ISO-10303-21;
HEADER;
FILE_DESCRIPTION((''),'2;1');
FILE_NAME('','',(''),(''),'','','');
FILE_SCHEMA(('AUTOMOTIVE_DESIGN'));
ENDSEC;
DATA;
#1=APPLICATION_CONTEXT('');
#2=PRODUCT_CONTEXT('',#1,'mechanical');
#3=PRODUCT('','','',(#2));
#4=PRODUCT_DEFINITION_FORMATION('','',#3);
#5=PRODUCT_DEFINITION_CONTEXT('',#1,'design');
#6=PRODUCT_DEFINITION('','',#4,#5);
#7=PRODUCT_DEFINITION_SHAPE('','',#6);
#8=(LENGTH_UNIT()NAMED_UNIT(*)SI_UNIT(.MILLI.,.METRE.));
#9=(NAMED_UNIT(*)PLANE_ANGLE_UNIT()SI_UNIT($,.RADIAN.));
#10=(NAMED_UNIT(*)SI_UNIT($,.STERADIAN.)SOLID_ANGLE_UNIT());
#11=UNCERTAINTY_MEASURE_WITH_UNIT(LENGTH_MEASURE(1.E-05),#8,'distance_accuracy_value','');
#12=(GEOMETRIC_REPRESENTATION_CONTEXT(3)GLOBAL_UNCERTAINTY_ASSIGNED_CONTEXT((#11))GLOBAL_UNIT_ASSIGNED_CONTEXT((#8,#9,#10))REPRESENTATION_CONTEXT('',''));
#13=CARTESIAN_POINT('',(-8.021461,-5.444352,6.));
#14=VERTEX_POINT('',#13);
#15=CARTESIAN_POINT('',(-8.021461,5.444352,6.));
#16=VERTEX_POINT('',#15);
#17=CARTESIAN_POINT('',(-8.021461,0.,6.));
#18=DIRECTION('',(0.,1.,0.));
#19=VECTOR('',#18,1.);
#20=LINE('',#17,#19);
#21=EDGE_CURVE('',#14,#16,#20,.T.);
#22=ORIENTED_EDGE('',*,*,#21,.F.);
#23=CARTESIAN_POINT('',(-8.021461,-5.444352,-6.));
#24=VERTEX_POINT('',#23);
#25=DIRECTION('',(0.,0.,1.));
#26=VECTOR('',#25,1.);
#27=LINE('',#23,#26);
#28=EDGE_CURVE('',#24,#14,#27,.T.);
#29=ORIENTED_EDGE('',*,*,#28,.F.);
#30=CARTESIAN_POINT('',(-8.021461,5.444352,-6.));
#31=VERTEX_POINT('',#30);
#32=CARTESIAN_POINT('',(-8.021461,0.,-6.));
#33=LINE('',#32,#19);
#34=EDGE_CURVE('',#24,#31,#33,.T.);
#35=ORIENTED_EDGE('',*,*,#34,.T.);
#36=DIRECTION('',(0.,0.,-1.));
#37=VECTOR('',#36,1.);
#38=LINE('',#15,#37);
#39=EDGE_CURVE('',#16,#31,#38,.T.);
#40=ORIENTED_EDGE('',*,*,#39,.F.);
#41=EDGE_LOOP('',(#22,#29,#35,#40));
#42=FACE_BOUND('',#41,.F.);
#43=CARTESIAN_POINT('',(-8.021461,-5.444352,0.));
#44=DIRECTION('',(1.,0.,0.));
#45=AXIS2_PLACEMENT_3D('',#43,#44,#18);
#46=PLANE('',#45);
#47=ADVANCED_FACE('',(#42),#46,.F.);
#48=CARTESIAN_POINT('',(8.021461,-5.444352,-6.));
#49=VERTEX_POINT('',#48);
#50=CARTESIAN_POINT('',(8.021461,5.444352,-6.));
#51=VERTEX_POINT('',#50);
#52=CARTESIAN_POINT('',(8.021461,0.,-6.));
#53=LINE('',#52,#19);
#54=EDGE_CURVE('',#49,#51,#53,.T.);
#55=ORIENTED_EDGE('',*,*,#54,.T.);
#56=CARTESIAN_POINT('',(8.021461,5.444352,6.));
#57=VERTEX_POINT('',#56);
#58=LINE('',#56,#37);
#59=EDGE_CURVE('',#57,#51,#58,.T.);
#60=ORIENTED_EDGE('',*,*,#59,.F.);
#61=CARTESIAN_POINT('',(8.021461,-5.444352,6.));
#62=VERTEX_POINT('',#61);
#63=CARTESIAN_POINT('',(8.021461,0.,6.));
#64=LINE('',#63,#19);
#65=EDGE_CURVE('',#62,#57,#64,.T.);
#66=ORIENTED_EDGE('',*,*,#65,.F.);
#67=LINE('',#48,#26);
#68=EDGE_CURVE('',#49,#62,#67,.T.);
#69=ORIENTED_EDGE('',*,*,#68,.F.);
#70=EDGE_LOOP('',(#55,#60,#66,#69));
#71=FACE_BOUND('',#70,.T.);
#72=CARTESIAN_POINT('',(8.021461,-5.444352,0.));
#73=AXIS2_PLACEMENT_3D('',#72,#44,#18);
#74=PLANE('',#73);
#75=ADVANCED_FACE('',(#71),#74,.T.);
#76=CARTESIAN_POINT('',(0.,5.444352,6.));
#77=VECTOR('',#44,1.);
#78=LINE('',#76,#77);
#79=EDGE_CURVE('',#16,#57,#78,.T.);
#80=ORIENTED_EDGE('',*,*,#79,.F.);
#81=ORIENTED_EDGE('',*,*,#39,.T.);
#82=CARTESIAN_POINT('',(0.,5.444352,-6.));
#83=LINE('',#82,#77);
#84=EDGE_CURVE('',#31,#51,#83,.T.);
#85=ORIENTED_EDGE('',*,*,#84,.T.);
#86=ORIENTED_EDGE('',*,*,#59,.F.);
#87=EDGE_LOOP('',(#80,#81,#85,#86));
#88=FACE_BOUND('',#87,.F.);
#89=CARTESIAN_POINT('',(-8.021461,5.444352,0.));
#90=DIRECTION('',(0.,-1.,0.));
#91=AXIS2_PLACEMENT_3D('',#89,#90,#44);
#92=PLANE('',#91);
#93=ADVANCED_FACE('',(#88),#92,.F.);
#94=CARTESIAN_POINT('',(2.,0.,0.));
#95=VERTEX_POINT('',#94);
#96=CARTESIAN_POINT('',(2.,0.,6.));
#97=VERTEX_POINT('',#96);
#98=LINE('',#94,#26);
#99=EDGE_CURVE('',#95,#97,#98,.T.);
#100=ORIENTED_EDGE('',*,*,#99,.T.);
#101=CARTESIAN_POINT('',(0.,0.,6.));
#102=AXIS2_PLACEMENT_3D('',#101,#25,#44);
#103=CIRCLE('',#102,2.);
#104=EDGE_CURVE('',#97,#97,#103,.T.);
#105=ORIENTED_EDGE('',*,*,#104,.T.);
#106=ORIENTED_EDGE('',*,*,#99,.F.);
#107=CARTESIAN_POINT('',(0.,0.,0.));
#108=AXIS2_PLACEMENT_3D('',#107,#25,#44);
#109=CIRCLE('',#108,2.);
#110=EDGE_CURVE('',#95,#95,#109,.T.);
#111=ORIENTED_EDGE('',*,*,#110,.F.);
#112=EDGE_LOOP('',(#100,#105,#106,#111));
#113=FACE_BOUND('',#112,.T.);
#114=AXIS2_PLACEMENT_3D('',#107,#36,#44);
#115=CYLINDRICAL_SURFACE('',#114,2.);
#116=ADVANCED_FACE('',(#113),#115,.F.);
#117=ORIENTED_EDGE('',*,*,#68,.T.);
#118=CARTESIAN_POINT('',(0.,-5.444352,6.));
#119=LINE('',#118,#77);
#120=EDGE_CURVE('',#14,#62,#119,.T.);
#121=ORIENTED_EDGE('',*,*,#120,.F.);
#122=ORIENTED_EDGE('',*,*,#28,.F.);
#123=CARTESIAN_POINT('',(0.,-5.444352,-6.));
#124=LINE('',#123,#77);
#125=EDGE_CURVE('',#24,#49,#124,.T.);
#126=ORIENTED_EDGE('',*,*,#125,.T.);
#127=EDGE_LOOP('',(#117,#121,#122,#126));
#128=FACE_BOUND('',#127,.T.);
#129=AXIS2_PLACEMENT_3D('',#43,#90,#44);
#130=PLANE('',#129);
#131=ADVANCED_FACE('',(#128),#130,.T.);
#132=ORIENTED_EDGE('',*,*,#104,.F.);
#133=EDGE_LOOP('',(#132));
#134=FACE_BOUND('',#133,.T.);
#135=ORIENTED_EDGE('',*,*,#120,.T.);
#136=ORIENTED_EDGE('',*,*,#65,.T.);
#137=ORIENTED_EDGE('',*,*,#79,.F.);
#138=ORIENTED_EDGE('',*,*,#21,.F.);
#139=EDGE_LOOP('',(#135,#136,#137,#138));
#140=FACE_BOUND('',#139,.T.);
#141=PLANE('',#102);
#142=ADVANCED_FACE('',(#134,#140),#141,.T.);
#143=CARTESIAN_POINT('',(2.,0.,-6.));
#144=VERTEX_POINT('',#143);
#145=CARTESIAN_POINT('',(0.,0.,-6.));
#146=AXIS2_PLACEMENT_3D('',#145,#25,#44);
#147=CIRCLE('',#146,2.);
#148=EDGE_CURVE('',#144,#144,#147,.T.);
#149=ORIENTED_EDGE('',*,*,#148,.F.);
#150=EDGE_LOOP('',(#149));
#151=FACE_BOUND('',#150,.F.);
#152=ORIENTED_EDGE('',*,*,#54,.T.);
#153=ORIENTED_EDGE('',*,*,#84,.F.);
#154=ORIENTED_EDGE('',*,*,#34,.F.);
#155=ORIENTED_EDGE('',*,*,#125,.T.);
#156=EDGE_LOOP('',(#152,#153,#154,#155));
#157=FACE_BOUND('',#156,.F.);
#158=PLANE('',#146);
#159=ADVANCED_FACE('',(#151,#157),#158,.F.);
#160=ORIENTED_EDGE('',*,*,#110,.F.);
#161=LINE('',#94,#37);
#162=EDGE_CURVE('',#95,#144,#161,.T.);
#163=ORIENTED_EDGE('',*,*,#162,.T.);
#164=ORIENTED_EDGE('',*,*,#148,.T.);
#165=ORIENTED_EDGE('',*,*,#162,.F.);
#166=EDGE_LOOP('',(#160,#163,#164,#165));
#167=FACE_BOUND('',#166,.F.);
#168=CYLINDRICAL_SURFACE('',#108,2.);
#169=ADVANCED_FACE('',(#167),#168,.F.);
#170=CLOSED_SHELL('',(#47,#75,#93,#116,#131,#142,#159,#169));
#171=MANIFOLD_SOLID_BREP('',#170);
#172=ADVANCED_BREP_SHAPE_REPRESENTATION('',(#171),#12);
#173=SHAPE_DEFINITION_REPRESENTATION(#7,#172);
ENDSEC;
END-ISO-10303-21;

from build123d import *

# Parameters (mm, degrees)
F0_R          = 19.05
F0_R_2        = 7.9375
F1_DEPTH      = 25.4
F3_W          = 16.0429216921
F3_H          = 10.8887040988
F3_R          = 2
F4_DEPTH      = 6
F4_DEPTH_BACK = 6


# Not quite as in the source:
# - the program builds the solid bodies; features that only make, move or delete a surface that nothing else refers to are left out


with BuildPart() as f1:
    # F0 (on Top) → F1 (new body)
    with BuildSketch(Plane.XY):
        Circle(F0_R)
        Circle(F0_R_2, mode=Mode.SUBTRACT)
    extrude(amount=F1_DEPTH)


with BuildPart() as f4:
    # F3 (on Top) → F4 (new body, two sides)
    with BuildSketch(Plane.XY) as f4_sk:
        Rectangle(F3_W, F3_H)
        Circle(F3_R, mode=Mode.SUBTRACT)
    extrude(amount=F4_DEPTH)
    extrude(f4_sk.sketch, amount=-F4_DEPTH_BACK)


solid = f4.part
